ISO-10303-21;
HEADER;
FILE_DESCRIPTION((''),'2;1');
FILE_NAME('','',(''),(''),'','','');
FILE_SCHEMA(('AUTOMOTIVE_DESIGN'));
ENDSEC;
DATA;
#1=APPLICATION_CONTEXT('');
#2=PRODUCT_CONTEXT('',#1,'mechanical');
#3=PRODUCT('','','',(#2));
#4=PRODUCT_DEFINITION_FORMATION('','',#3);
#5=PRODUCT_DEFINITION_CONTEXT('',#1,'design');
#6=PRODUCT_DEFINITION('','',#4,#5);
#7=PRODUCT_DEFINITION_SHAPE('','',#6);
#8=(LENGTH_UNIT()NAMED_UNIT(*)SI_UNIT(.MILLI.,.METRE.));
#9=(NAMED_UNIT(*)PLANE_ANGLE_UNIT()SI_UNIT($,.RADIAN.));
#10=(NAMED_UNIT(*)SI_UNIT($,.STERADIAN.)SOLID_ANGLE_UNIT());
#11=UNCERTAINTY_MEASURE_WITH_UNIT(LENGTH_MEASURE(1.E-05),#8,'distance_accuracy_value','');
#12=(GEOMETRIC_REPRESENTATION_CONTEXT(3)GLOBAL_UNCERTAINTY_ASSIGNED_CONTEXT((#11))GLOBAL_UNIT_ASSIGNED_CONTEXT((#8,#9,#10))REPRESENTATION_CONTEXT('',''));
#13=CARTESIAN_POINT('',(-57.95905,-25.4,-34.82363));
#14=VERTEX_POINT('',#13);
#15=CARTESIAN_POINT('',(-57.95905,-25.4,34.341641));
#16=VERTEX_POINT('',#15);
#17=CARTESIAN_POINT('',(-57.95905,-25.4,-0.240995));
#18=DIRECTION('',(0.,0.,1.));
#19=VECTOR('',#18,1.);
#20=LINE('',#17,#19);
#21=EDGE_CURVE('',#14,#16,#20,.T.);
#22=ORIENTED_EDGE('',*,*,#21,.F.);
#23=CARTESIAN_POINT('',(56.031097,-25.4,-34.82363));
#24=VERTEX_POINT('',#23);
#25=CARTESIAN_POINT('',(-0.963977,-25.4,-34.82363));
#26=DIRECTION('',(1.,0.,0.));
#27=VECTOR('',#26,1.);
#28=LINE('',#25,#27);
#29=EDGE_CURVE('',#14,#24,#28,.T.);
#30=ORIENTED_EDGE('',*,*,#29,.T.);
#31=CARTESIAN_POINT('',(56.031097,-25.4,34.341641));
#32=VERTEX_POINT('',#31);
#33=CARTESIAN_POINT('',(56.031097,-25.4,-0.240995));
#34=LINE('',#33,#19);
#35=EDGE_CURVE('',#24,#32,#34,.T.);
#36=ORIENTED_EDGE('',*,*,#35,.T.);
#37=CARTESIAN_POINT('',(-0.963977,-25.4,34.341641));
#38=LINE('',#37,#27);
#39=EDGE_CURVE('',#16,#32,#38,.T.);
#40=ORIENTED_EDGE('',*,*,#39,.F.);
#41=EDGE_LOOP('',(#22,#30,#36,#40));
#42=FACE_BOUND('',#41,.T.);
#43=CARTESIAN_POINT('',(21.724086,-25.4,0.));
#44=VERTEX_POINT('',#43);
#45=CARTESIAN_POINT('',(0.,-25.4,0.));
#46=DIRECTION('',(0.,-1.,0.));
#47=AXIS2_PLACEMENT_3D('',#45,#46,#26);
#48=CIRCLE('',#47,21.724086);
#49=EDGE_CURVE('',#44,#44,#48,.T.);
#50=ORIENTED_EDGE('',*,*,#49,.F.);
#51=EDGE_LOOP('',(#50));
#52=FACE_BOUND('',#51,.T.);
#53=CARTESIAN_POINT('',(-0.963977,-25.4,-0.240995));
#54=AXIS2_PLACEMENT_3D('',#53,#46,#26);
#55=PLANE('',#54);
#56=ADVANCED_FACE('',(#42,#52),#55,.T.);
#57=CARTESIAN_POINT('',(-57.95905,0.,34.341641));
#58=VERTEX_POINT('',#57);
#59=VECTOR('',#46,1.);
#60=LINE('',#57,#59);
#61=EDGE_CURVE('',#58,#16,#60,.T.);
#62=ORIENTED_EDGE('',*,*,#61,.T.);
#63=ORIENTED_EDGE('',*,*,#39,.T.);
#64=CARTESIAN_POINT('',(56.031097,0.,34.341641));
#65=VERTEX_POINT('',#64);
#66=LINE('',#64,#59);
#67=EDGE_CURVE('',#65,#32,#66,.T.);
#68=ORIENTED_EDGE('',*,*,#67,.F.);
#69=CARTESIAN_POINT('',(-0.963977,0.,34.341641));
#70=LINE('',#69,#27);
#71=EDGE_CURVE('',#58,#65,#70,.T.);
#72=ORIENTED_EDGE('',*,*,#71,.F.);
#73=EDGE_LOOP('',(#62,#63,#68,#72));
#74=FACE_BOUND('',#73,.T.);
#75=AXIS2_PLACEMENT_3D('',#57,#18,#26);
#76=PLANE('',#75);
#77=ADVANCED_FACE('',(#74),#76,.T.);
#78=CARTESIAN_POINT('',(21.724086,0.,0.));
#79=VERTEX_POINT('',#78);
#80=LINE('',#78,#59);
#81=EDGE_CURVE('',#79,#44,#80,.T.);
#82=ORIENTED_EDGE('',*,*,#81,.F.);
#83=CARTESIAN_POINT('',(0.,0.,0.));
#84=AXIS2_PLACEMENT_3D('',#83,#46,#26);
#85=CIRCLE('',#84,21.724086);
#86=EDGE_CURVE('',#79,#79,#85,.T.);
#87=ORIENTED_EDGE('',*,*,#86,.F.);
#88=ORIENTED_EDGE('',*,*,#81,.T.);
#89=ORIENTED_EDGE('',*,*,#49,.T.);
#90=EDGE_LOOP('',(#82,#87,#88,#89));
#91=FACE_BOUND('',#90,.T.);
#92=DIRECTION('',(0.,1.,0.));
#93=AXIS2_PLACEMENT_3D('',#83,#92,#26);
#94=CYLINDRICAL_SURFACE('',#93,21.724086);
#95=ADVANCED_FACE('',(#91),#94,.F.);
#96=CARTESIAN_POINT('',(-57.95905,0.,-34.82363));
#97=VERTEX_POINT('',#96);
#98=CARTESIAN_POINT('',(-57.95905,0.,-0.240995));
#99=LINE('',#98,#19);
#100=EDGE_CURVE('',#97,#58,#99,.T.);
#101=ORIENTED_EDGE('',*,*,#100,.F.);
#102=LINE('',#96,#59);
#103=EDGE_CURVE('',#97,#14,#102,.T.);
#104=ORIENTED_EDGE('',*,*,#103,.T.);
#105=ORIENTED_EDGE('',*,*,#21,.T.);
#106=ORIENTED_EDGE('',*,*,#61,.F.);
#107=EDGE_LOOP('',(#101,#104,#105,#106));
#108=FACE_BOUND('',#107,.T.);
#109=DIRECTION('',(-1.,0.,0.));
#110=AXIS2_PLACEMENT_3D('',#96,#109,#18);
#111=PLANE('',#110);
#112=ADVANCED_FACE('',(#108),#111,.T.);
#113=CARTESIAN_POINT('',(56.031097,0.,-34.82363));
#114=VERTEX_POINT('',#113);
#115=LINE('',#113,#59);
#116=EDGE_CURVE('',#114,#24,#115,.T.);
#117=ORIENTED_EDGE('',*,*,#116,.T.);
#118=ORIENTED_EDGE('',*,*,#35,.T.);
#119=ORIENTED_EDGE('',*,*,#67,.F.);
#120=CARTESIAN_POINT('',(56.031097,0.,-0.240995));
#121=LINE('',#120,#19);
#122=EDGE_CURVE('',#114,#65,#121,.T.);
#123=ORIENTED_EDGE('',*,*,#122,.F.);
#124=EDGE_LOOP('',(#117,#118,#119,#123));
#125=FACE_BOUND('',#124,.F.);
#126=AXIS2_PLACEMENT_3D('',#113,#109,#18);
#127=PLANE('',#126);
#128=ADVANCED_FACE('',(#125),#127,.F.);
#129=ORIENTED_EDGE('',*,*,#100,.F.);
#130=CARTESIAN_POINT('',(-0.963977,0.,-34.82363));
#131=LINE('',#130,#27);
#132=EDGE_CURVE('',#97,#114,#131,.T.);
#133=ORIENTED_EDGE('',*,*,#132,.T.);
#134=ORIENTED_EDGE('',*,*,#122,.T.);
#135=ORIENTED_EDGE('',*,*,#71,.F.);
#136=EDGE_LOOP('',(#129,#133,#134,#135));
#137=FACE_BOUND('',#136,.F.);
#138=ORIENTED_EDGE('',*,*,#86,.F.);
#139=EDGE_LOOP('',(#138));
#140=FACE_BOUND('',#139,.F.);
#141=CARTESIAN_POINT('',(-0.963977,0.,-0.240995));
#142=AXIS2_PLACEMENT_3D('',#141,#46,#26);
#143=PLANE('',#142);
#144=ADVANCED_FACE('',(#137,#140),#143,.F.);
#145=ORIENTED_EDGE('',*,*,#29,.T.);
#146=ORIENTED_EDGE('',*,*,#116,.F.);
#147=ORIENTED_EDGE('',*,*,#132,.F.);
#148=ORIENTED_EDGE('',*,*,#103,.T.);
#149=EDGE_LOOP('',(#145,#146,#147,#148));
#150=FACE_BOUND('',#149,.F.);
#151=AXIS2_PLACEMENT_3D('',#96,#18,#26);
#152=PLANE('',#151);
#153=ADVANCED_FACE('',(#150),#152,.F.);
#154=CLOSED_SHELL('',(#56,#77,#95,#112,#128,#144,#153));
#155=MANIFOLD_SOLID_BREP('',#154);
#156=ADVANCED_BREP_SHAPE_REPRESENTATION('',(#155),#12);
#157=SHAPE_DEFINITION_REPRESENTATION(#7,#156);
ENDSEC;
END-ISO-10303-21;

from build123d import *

# Parameters (mm, degrees)
F0_W     = 113.9901466668
F0_H     = 69.1652707756
F0_R     = 21.7240856747
F2_DEPTH = 25.4


# Not quite as in the source:
# - the program builds the solid bodies; features that only make, move or delete a surface that nothing else refers to are left out


with BuildPart() as f2:
    # F0 (on Front) → F2 (new body)
    with BuildSketch(Plane.XZ):
        with Locations((-0.9639766067, -0.2409946173)):
            Rectangle(F0_W, F0_H)
        Circle(F0_R, mode=Mode.SUBTRACT)
    extrude(amount=F2_DEPTH)


solid = f2.part
